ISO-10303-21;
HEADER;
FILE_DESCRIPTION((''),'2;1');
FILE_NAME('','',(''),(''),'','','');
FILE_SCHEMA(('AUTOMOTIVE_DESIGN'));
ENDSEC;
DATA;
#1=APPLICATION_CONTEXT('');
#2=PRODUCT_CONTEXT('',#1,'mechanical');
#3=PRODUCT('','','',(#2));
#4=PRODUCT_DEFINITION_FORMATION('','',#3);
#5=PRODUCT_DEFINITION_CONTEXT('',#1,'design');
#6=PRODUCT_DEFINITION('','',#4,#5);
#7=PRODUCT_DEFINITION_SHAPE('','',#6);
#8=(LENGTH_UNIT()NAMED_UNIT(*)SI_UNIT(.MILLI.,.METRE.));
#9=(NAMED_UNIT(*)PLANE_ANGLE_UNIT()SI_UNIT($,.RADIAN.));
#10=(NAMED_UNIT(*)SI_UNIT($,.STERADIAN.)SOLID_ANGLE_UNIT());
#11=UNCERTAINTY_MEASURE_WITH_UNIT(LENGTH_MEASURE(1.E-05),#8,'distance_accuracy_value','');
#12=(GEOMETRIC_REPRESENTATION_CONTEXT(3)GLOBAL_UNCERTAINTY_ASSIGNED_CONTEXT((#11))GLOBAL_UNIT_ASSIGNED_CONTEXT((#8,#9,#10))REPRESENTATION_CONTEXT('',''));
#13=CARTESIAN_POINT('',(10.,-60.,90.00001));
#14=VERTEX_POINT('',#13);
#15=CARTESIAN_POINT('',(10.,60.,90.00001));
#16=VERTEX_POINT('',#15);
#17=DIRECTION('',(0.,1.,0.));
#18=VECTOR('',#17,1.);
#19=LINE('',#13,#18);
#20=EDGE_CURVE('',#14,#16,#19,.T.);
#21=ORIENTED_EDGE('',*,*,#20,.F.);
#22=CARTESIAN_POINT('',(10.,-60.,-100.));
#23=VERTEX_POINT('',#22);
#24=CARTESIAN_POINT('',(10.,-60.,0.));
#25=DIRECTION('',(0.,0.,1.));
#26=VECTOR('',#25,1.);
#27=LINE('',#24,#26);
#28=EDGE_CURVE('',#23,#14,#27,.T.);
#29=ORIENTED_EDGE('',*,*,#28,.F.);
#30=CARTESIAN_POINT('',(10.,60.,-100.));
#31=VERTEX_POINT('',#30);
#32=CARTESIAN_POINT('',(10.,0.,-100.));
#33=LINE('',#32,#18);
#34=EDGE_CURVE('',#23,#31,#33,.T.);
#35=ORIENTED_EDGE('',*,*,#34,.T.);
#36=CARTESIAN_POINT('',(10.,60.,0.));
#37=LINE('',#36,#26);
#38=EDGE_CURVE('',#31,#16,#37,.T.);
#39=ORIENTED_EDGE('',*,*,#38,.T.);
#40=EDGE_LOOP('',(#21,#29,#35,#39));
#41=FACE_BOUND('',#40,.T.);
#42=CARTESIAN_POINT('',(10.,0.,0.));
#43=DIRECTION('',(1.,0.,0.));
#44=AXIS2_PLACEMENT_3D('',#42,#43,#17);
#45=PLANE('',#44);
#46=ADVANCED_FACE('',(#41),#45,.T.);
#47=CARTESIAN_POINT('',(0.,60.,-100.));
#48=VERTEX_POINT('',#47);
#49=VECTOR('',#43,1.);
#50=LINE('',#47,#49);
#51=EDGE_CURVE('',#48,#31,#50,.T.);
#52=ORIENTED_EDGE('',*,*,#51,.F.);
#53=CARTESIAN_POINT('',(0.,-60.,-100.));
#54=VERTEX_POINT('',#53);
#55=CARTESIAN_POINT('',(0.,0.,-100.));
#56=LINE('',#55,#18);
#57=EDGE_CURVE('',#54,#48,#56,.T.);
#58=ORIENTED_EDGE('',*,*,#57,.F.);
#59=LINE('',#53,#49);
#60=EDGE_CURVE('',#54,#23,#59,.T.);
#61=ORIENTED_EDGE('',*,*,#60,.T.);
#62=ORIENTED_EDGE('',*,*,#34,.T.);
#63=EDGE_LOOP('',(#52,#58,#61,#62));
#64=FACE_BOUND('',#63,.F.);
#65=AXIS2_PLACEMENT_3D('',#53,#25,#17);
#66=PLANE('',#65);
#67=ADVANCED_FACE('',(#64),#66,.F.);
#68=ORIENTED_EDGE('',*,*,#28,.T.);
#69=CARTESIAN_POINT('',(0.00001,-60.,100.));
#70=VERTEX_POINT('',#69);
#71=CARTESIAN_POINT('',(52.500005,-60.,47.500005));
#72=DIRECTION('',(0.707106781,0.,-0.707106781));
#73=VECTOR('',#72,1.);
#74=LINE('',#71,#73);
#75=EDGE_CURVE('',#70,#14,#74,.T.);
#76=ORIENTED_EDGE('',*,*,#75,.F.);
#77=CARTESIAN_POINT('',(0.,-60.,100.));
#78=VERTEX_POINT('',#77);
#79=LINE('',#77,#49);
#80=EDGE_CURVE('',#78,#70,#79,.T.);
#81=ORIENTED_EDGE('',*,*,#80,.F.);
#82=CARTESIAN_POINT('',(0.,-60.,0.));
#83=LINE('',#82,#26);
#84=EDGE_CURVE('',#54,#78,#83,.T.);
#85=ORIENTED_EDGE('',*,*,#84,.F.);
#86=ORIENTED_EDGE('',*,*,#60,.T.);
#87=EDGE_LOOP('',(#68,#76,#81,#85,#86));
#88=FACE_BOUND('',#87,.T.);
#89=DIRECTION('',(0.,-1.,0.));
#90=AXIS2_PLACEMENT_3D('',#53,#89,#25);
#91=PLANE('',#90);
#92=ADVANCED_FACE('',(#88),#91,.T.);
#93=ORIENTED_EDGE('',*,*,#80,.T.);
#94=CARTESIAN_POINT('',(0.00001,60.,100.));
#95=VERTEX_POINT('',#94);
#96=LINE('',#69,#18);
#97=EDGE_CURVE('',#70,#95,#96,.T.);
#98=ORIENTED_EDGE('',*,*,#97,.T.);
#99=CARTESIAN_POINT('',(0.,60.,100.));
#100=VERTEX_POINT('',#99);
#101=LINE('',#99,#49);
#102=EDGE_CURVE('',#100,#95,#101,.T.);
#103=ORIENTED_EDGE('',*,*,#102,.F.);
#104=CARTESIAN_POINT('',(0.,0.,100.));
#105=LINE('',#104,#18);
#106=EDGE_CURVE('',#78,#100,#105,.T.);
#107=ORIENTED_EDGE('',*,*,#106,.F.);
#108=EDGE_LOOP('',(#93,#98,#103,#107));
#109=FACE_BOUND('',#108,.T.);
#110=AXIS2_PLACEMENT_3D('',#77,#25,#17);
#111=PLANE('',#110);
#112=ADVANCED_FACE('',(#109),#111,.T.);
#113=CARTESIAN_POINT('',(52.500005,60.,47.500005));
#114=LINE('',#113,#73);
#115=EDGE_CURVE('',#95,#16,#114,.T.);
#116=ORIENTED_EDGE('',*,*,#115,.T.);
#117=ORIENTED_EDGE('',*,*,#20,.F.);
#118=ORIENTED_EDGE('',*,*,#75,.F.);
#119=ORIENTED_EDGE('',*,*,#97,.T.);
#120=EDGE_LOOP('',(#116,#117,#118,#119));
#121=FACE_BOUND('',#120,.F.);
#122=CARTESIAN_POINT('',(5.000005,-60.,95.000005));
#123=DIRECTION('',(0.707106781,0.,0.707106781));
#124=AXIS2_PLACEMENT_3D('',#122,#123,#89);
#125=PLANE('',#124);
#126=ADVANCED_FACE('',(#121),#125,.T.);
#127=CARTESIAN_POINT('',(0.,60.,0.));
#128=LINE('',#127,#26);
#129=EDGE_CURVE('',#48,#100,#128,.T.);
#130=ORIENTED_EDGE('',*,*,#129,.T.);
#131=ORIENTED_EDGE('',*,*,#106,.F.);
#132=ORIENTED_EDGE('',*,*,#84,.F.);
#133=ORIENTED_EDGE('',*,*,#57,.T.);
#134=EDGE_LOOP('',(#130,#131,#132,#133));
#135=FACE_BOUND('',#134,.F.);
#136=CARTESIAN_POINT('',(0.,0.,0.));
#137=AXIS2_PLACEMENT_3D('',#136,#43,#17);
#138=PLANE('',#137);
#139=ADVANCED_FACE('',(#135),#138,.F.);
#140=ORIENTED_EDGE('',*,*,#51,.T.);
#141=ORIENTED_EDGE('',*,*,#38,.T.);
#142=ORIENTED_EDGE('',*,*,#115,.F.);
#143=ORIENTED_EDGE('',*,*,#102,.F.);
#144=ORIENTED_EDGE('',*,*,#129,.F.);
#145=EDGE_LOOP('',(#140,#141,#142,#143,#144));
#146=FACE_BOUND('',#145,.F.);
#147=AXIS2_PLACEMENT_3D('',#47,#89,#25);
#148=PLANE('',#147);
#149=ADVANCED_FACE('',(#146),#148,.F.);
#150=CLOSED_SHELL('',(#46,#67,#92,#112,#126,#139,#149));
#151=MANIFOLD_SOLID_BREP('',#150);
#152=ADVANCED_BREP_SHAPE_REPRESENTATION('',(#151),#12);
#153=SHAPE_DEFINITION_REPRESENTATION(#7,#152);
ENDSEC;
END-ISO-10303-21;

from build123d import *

# Parameters (mm, degrees)
F0_W     = 120
F0_H     = 200
F1_DEPTH = 10
F2_SIZE  = 9.99999


# Not quite as in the source:
# - a fillet or chamfer is up to 0.001 mm smaller than in the source, because OpenCascade refuses the exact size


with BuildPart() as f1:
    # F0 (on Right) → F1 (new body)
    with BuildSketch(Plane.YZ):
        Rectangle(F0_W, F0_H)
    extrude(amount=F1_DEPTH)

    # F2 (size 10 in the source; OpenCascade refuses exactly that, so slightly less here)
    f2_edges = [f1.edges().sort_by_distance(p)[0] for p in [
        (10, 0, 100),
    ]]
    chamfer(f2_edges, length=F2_SIZE)


solid = f1.part
